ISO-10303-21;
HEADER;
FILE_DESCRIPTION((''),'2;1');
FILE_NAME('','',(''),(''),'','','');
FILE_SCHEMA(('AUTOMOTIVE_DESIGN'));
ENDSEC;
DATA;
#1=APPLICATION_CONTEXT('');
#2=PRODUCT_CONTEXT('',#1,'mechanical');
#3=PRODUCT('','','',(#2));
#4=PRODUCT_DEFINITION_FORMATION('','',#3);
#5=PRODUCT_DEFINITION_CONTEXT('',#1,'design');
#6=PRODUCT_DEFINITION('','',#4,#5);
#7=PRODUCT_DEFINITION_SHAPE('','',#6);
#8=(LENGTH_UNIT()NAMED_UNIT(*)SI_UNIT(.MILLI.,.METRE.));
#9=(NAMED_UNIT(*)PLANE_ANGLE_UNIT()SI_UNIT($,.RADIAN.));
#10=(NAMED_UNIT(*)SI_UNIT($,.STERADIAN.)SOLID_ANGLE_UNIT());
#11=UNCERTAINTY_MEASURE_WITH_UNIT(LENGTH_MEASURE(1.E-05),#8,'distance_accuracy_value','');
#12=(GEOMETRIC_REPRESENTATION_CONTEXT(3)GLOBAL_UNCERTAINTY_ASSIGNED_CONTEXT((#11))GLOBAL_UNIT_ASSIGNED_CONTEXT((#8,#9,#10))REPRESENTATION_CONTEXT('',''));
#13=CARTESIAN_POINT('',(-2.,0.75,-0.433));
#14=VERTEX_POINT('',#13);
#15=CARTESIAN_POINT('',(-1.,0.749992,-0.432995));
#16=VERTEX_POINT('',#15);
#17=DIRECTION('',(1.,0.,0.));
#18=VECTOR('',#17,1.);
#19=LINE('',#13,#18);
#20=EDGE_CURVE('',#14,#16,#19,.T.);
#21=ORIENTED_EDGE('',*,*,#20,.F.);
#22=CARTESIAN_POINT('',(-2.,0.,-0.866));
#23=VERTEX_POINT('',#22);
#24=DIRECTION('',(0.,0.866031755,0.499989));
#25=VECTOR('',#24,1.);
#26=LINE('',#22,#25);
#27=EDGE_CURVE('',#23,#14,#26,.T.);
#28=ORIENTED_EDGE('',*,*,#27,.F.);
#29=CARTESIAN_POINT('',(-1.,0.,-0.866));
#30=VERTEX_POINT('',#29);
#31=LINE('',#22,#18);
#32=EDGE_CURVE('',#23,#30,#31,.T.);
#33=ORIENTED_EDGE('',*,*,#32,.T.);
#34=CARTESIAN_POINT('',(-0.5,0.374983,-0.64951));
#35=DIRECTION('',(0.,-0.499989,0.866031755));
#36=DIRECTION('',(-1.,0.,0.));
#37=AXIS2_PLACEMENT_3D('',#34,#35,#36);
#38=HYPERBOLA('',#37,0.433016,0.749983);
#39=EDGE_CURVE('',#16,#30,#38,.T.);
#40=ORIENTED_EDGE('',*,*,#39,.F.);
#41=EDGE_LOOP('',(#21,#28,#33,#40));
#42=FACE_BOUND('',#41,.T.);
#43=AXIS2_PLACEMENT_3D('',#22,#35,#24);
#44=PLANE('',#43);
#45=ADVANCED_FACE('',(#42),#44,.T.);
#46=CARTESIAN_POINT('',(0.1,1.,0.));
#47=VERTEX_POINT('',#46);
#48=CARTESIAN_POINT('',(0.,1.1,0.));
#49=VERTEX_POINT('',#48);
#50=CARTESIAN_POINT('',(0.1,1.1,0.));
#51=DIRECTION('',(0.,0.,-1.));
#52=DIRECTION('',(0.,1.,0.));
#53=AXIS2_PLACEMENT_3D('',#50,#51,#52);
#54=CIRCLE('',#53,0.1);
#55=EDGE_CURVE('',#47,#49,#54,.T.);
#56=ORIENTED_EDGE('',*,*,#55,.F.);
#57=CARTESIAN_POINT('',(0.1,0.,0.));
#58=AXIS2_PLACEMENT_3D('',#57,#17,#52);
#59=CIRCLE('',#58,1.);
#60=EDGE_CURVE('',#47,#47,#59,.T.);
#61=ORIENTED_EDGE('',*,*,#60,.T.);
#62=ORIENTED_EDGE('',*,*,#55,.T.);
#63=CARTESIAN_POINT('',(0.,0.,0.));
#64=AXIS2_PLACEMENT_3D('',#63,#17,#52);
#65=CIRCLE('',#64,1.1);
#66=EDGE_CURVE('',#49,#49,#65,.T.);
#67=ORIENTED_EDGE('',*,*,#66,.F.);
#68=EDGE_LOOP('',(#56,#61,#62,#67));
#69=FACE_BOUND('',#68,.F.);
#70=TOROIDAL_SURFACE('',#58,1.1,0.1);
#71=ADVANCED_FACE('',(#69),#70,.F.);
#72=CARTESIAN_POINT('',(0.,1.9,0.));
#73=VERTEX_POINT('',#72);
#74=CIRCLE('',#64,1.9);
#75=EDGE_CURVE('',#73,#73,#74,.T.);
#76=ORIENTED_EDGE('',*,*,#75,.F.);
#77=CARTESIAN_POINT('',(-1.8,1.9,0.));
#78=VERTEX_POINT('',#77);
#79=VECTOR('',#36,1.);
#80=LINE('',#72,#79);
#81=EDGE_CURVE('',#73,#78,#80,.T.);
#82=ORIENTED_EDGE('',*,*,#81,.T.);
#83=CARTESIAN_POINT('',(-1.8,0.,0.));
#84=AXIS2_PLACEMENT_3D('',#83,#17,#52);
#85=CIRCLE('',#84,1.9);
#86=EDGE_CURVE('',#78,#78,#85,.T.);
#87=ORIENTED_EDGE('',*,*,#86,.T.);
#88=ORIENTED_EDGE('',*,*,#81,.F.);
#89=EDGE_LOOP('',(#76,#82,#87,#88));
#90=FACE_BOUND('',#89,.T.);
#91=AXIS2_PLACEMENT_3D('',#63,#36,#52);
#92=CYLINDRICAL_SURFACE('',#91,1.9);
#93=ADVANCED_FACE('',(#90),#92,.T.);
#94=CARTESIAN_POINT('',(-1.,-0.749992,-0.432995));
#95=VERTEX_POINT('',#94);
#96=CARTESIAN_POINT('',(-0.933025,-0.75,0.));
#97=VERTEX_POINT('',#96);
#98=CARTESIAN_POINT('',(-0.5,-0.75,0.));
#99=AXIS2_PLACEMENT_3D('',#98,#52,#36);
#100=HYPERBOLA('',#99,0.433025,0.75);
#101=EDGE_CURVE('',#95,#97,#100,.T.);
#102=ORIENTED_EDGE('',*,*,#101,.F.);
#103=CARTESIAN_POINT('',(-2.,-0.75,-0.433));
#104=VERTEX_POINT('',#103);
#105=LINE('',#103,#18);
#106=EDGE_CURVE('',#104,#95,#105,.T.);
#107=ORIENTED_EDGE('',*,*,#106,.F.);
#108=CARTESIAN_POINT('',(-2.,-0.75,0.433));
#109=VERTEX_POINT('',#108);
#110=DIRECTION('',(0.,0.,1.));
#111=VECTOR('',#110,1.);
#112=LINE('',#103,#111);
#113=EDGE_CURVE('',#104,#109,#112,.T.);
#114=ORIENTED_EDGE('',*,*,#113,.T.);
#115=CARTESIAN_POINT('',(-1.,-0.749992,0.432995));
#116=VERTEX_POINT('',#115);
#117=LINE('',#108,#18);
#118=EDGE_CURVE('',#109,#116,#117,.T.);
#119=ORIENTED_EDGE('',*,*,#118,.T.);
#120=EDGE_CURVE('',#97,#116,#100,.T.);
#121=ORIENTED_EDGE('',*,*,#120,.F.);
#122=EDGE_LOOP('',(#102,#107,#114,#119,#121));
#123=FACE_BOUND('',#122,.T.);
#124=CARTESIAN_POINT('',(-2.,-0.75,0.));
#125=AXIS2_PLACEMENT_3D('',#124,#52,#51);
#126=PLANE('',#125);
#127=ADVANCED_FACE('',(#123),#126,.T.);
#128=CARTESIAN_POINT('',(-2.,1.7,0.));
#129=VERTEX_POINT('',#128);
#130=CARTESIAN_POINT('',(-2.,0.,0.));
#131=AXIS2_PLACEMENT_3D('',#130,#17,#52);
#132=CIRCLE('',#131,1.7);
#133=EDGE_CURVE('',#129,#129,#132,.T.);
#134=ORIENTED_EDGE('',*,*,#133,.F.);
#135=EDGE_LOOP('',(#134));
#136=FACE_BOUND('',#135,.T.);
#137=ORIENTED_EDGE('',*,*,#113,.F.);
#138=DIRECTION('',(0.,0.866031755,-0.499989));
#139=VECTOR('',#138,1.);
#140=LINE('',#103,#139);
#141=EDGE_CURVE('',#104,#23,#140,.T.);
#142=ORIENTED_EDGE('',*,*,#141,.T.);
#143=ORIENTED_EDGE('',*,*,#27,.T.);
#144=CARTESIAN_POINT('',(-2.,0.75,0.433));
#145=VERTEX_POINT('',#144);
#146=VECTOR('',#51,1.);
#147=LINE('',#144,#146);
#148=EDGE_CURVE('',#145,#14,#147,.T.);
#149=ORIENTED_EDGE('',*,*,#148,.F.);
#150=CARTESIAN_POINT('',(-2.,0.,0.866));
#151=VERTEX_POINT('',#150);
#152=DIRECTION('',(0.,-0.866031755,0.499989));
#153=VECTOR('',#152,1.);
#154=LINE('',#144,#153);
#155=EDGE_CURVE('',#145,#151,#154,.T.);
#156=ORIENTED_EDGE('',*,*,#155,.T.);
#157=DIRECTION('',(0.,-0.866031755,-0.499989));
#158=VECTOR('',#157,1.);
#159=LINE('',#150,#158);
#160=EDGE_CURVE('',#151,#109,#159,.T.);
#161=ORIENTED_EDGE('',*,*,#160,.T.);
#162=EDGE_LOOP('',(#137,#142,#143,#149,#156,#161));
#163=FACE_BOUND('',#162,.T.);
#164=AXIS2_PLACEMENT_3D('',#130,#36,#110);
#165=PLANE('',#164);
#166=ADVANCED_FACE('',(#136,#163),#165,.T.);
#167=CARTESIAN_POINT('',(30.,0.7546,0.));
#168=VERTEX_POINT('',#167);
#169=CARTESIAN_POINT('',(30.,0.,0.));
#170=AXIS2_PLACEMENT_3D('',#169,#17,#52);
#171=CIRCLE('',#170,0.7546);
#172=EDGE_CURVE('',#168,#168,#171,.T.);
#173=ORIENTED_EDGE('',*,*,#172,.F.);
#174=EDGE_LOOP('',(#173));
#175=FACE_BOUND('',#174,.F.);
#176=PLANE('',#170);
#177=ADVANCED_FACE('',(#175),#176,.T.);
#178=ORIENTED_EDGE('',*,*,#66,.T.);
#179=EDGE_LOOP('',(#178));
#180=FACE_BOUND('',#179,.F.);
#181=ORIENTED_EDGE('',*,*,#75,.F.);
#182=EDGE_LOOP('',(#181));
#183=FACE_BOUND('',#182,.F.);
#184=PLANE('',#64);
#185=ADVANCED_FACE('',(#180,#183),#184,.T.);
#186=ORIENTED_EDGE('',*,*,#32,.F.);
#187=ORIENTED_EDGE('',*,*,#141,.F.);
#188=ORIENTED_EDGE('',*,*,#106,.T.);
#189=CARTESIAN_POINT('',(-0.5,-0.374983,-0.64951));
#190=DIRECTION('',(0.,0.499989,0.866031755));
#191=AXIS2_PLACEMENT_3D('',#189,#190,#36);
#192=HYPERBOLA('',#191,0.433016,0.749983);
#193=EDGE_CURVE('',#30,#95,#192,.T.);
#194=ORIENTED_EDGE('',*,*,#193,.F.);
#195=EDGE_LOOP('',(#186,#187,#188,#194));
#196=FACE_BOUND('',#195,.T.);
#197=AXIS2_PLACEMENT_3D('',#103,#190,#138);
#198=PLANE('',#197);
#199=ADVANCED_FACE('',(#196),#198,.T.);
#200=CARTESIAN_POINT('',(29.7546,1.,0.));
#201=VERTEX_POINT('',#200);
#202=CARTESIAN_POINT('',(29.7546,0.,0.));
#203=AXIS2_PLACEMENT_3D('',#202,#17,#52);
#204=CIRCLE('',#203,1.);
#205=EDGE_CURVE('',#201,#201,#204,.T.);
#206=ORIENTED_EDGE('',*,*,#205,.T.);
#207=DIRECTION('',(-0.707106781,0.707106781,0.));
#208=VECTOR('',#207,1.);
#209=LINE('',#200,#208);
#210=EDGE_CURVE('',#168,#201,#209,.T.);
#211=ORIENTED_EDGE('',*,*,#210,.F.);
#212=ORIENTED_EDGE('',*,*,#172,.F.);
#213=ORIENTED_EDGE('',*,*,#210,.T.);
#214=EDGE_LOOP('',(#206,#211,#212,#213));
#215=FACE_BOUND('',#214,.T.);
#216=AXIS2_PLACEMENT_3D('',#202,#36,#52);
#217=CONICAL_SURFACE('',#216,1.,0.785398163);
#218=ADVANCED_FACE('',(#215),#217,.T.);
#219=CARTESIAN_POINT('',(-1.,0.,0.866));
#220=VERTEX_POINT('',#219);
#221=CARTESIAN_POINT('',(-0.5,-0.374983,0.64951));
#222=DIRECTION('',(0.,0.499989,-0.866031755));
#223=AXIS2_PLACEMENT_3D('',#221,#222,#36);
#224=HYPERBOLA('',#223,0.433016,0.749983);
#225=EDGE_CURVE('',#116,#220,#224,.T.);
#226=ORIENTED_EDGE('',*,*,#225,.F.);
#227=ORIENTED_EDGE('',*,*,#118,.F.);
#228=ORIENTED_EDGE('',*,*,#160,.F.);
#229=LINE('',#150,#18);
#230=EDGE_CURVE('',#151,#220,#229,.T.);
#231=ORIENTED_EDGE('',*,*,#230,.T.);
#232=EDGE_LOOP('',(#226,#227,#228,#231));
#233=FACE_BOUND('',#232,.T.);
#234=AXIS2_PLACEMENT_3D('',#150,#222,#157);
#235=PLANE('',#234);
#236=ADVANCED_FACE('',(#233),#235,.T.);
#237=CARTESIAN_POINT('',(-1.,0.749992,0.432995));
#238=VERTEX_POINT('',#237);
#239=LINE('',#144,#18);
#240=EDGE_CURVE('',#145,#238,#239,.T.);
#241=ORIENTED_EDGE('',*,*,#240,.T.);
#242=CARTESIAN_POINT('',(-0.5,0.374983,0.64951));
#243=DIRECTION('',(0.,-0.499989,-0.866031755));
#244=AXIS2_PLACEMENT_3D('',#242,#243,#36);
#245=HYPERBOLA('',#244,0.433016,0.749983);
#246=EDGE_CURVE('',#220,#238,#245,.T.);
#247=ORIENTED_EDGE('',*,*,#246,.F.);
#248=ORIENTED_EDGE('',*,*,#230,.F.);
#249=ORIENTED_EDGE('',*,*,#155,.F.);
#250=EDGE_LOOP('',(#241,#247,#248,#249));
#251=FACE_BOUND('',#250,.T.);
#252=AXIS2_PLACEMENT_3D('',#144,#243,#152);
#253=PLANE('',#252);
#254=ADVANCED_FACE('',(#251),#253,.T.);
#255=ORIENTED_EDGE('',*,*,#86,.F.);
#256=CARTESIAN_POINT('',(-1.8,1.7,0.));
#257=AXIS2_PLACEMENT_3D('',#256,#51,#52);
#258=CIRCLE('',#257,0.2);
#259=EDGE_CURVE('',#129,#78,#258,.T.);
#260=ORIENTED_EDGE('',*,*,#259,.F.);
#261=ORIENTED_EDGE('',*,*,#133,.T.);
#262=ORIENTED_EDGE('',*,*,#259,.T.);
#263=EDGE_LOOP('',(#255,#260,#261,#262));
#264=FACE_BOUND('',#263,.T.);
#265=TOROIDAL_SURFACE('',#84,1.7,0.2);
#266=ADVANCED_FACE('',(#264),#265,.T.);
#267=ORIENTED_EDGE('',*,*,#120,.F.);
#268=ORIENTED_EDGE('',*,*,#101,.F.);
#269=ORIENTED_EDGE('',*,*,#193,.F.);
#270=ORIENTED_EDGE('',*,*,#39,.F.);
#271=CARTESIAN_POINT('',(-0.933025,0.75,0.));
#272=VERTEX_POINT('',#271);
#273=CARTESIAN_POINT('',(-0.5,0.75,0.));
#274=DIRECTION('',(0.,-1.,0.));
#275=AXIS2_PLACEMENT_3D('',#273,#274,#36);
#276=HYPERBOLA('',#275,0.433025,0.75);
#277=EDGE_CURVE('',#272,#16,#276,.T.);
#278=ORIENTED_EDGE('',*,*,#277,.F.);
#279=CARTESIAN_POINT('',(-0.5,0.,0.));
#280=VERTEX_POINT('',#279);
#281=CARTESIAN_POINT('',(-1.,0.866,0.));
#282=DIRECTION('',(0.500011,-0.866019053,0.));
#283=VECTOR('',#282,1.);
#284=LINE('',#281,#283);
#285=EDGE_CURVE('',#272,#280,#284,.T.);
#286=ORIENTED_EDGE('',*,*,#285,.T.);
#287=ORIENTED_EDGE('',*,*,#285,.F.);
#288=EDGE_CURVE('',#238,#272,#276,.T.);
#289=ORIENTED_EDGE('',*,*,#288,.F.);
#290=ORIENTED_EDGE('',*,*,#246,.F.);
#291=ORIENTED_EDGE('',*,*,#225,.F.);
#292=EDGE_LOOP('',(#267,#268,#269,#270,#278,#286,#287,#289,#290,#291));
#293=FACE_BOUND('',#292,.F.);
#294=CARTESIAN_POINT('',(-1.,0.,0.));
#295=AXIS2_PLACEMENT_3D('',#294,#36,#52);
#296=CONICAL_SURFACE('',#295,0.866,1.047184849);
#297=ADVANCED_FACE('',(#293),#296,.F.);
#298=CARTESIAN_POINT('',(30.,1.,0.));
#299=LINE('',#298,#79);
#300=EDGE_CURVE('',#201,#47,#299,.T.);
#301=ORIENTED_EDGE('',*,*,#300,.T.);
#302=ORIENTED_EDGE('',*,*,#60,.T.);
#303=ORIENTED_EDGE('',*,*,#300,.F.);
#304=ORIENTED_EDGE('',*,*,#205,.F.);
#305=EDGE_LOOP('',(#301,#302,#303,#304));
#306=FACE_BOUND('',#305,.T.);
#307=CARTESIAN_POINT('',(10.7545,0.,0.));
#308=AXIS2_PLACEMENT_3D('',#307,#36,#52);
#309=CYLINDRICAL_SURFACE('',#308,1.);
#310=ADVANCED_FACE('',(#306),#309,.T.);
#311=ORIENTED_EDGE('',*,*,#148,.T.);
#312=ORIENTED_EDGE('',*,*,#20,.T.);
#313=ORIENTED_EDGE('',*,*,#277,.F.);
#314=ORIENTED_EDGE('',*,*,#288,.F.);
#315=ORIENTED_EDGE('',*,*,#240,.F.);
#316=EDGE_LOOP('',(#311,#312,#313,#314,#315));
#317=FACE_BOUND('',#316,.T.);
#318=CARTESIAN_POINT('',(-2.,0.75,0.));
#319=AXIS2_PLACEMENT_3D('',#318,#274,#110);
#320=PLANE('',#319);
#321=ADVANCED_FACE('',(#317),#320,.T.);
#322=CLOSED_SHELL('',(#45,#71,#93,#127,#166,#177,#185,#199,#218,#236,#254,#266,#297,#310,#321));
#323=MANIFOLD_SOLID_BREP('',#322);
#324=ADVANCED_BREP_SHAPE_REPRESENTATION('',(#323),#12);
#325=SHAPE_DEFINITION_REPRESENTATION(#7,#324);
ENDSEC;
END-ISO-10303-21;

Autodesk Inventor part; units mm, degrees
ref_plane "YZ Plane" through (0, 0, 0) normal (1, 0, 0) x (0, 1, 0)
ref_plane "XZ Plane" through (0, 0, 0) normal (0, 1, 0) x (-1, 0, 0)
sketch "Sketch1" plane through (0, 0, 0) normal (0, 0, 1) x (1, 0, 0)
  line L0 (-0.5, 0) -> (30, 0)
  line L1 (30, 0) -> (30, 1)
  line L2 (30, 1) -> (11, 1)
  line L3 (11, 1) -> (10.7545, 1)
  line L4 (10.7545, 1) -> (0, 1)
  line L5 (0, 1) -> (0, 1.9)
  line L6 (0, 1.9) -> (-2, 1.9)
  line L7 (-2, 1.9) -> (-2, 0.866)
  line L8 (-2, 0.866) -> (-1, 0.866)
  line L9 (-1, 0.866) -> (-0.5, 0)
  line L10 (-8.4, 0) -> (36.4, 0) projected
  line L11 (0, -0.38) -> (0, 2.28) projected
  line L12 (11, 1) -> (0, 1) construction
  dimension "d1" = 19
  dimension "d2" = 0.2455
  dimension "d3" = 2
  dimension "d4" = 1
  dimension "d5" = 60
  dimension "d6" = 2
  dimension "d7" = 2
  dimension "d8" = 1.7321
  dimension "d9" = 3.8
  dimension "d26" = 30
revolve "Body" add sketch "Sketch1" angle 360 about axis through (-0.5, 0, 0) along (1, 0, 0)
sketch "Sketch2" plane through (-2, 0, 0) normal (-1, 0, 0) x (0, 0, 1)
  circle A0 centre (0, 0) radius 0.866 projected
  line L0 (0, -2.66) -> (0, 2.66) projected
  line L1 (-2.66, 0) -> (2.66, 0) projected
  line L2 (0.866, 0) -> (0.433, -0.75)
  line L3 (0.433, -0.75) -> (-0.433, -0.75)
  line L4 (-0.433, -0.75) -> (-0.866, 0)
  line L5 (-0.866, 0) -> (-0.433, 0.75)
  line L6 (-0.433, 0.75) -> (0.433, 0.75)
  line L7 (0.433, 0.75) -> (0.866, 0)
extrude "Slot" add sketch "Sketch2" against normal up to next contours L7 A0 | A0 L2 | L6 L0 A0 | A0 L0 L3 | L0 L6 A0 | A0 L3 L0 | L4 A0 | A0 L5
fillet "Fillet1" radius 0.2 1 edges at (-2, -1.9, 0)
thread "Thread" size "M2x0.4" class "6g" standard "ISO Metric profile" length 19
chamfer "Chamfer1" distance 0.2454 distance2 0.2454 1 edges at (30, -1, 0) measured on face at (30, -0.3275, -0.4215)
ref_plane "Work Plane1" through (29, 0, 0) normal (0, -1, 0) x (1, 0, 0)
fillet "Fillet2" radius 0.1 1 edges at (0, -1, 0)
equation "\"d30\" = R"
equation "\"d17\" = RR"
equation "\"d13\" = GEL"
equation "\"d15\" = -0.5 * SPD + 0.5 * GD"
equation "\"d16\" = GUL"
equation "\"d1\" = GEL"
equation "\"d3\" = KOH"
equation "\"d4\" = INTI"
equation "\"d6\" = GD"
equation "\"d7\" = BDM"
equation "\"d8\" = 1.1547 * SW"
equation "\"d9\" = KOD"
equation "\"d26\" = NLG"
equation "\"GD\" = NND"
equation "\"NLG\" = 30"
equation "\"GEL\" = 19"
equation "\"KOD\" = 3.8"
equation "\"KOH\" = 2"
equation "\"INTI\" = 1"
equation "\"GAL\" = 0.24538"
equation "\"GUL\" = 0.24538"
equation "\"BDM\" = NND"
equation "\"SW\" = 1.5"
equation "\"RR\" = 0.2"
equation "\"SPD\" = 1.50924"
equation "\"R\" = 0.1"
equation "\"TOA\" = 30deg"
equation "\"GD1\" = 1.50924"
equation "\"THREADDIA\" = 2"
equation "\"FAWI\" = 45deg"
equation "\"ANG\" = 120deg"
equation "\"PTC\" = 0.4"
equation "\"NND\" = 2"
equation "\"E0\" = 1.155 * SW"
properties part number "DIN 912 - M2 x 30" material "Steel, Mild"
